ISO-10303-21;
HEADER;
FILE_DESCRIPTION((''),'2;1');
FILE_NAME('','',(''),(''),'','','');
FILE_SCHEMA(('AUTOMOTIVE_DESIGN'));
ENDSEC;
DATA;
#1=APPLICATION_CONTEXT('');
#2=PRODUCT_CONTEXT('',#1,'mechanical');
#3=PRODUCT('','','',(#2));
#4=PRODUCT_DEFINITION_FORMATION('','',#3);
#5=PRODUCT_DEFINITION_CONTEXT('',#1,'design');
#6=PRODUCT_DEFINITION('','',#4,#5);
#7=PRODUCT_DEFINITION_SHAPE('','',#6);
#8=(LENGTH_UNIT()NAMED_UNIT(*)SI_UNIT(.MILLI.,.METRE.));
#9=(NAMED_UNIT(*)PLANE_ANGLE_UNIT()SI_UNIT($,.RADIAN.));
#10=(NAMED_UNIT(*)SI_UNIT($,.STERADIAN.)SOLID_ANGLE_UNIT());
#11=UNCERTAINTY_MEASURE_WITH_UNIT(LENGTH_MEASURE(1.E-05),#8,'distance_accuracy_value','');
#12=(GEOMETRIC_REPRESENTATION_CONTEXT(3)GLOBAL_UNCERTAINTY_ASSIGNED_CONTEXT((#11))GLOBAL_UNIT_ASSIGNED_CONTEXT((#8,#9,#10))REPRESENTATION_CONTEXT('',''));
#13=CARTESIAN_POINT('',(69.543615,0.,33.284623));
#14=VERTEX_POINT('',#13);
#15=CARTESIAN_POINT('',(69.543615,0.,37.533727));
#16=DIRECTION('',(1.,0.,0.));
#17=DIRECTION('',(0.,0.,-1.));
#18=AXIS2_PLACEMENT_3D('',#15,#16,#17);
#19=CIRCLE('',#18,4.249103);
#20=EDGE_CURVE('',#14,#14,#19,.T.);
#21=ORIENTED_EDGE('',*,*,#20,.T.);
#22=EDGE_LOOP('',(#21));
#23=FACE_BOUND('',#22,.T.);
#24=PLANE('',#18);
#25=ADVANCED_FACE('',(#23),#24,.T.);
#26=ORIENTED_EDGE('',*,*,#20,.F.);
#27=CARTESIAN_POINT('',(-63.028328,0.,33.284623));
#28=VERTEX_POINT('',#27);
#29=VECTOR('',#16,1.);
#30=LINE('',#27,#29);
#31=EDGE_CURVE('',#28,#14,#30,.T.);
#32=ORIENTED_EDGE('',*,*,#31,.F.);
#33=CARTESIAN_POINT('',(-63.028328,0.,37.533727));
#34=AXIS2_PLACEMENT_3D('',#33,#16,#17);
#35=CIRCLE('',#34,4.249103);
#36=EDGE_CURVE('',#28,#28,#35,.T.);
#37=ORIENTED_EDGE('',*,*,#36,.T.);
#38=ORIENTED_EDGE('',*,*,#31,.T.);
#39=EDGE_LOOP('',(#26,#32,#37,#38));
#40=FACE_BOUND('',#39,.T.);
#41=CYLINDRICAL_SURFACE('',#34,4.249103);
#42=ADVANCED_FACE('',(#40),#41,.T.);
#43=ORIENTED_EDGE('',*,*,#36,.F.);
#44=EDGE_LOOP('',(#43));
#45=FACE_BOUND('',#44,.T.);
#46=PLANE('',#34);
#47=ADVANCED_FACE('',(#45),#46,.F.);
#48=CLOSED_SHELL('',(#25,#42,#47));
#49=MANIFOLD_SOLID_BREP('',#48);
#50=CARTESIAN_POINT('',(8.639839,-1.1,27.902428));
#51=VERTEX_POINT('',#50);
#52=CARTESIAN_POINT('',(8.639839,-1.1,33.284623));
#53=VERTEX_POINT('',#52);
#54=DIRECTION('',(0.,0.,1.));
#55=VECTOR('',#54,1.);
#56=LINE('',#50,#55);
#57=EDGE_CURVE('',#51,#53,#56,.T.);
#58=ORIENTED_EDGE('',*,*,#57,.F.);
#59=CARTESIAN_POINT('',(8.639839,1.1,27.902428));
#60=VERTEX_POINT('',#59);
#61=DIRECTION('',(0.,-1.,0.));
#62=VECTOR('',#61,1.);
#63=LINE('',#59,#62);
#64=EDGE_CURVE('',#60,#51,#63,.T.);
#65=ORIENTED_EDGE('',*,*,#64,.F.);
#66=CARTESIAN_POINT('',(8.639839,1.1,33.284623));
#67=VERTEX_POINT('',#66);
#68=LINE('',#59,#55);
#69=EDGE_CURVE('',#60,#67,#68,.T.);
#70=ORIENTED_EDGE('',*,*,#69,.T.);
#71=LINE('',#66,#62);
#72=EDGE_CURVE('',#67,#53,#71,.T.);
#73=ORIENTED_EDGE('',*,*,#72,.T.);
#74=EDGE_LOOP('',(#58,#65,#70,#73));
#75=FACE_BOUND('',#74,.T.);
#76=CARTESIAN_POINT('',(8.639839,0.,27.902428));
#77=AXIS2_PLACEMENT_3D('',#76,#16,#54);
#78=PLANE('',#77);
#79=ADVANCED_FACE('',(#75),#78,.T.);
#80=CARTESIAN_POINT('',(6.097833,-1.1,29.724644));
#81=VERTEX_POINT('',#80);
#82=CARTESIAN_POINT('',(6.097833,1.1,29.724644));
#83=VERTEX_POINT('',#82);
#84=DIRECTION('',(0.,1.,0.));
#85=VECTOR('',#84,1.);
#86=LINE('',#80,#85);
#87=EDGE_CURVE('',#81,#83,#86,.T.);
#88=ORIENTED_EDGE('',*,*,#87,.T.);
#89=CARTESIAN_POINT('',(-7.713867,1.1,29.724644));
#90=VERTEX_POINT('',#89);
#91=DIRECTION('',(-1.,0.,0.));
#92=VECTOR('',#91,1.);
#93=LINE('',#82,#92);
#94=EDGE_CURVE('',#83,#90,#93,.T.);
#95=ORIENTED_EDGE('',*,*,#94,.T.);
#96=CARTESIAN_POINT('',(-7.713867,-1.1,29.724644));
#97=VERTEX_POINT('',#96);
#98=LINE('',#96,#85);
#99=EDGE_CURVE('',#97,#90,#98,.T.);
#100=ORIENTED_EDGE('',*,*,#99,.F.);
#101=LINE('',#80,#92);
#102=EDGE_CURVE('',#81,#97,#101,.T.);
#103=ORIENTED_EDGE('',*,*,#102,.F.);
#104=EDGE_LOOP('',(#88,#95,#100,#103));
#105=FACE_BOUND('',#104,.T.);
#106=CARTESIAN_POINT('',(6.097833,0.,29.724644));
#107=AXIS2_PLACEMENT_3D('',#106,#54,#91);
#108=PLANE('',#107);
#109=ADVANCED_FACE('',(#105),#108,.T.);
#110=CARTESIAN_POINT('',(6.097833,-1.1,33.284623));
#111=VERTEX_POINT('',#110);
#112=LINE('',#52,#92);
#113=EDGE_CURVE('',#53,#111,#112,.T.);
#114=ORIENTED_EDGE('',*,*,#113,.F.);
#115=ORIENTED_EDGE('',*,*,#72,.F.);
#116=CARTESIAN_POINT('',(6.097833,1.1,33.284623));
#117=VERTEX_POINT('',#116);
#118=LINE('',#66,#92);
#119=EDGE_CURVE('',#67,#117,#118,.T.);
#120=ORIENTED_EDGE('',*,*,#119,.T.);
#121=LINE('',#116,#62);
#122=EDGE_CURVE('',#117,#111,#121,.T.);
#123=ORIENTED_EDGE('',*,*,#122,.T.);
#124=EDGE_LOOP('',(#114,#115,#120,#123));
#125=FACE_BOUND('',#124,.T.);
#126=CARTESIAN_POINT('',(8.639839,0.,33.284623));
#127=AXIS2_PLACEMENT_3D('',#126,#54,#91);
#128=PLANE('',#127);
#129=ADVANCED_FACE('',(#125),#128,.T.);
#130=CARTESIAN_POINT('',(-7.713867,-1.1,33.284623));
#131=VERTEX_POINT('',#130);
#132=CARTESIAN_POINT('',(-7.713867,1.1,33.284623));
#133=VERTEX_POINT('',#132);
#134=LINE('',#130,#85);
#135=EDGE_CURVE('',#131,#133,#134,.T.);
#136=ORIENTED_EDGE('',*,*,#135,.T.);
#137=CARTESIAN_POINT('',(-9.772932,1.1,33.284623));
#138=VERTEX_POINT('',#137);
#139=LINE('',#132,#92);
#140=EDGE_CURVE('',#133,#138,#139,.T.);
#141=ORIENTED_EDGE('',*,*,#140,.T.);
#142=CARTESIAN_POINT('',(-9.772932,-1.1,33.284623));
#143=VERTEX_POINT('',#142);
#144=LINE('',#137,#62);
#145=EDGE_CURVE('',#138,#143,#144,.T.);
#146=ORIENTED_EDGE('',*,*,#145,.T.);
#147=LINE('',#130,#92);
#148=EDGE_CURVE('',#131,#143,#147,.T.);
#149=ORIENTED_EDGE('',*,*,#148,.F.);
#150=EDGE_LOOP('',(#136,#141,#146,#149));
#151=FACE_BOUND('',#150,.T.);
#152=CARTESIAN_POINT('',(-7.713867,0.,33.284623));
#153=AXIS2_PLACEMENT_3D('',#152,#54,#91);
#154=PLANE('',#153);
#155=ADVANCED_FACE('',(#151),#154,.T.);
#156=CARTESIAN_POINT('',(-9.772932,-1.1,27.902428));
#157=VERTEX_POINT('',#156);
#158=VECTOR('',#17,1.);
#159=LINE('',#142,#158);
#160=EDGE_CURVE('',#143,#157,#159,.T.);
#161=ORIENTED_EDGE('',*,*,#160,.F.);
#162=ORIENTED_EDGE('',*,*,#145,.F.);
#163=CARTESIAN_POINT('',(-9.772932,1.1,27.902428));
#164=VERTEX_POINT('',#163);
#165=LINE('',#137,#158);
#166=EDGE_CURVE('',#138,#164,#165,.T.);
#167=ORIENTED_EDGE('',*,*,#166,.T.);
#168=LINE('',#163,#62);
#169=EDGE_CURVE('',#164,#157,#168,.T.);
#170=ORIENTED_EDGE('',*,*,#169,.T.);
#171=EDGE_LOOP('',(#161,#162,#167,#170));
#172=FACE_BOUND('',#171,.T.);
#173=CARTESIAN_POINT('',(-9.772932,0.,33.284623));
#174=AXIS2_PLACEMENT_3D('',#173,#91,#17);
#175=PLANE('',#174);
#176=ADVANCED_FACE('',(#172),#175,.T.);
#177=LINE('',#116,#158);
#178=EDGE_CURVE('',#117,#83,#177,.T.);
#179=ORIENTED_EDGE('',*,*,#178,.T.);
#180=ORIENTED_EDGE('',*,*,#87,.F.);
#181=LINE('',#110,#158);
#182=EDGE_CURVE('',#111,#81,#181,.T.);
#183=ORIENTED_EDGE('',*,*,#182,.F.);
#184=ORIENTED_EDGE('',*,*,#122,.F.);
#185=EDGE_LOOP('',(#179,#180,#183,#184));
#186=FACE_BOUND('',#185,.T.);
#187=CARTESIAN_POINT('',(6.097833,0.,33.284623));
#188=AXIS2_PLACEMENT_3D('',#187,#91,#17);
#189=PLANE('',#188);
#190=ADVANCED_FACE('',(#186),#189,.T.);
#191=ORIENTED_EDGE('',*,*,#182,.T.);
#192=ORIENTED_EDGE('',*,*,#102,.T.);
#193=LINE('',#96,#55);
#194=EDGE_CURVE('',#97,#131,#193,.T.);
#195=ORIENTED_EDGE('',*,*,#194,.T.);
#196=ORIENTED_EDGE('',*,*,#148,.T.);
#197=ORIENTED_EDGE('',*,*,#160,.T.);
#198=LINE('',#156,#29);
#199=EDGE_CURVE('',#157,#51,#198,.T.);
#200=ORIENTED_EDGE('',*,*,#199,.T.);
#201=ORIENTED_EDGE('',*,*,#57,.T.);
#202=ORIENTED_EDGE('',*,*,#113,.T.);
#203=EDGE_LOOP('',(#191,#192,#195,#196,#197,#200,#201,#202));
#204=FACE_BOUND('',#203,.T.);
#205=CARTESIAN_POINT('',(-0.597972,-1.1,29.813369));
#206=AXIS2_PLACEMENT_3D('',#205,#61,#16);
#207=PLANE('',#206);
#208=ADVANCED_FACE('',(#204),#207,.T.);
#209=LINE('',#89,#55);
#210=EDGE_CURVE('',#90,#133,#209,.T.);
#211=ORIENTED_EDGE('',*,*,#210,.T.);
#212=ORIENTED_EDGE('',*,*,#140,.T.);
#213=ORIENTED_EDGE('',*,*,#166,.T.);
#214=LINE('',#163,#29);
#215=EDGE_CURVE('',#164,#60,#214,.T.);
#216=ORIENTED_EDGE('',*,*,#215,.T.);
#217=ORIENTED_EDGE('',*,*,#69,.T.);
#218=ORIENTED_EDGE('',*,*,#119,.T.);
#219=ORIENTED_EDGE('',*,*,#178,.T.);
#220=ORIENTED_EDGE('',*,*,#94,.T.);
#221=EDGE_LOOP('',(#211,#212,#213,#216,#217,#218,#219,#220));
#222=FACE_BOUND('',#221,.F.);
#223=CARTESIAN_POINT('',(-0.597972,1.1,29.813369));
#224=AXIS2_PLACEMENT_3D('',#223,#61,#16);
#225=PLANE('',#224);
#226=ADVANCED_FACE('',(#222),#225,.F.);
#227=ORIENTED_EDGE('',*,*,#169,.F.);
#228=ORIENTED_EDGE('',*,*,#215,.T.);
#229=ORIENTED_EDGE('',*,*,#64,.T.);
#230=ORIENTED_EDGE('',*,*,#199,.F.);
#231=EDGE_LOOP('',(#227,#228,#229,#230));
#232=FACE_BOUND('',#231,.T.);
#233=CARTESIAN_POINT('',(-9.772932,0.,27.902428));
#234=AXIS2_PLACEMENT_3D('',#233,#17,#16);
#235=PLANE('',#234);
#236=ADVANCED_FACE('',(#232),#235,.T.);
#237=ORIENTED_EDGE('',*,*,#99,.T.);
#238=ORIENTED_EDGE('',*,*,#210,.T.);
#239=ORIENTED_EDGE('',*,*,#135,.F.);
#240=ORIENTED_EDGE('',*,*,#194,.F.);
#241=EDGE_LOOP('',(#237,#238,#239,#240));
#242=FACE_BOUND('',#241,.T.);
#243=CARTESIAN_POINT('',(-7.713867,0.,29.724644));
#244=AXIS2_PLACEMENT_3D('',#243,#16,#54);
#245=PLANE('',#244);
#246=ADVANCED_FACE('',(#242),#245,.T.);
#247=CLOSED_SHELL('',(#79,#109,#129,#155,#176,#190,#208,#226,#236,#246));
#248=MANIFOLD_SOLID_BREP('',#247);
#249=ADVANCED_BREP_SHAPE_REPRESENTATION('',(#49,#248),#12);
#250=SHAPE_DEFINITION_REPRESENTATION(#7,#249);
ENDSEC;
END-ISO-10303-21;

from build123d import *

# Parameters (mm, degrees)
F2_DEPTH = 1.1


# Not quite as in the source:
# - a feature of the source that left no trace in its solid (it failed there, or was rolled back) is left out


with BuildPart() as f1:
    # F0 (on Front) → F1 (revolve)
    with BuildSketch(Plane.XZ):
        Polygon((69.5436149836, 37.5337265432), (-63.0283281207, 37.5337265432), (-63.0283281207, 33.2846231759), (-9.7729321569, 33.2846231759), (-7.7138668858, 33.2846231759), (6.0978326946, 33.2846231759), (8.6398385465, 33.2846231759), (69.5436149836, 33.2846231759), align=None)
    revolve(axis=Axis((3.2576434314, 0, 37.5337265432), (1, 0, 0)))


with BuildPart() as f2:
    # F0 (on Front) → F2 (new body, symmetric)
    with BuildSketch(Plane.XZ):
        Polygon((-7.7138668858, 33.2846231759), (-9.7729321569, 33.2846231759), (-9.7729321569, 27.9024280608), (8.6398385465, 27.9024280608), (8.6398385465, 33.2846231759), (6.0978326946, 33.2846231759), (6.0978326946, 29.724644497), (-7.7138668858, 29.724644497), align=None)
    extrude(amount=F2_DEPTH, both=True)


solid = Compound([f1.part, f2.part])
